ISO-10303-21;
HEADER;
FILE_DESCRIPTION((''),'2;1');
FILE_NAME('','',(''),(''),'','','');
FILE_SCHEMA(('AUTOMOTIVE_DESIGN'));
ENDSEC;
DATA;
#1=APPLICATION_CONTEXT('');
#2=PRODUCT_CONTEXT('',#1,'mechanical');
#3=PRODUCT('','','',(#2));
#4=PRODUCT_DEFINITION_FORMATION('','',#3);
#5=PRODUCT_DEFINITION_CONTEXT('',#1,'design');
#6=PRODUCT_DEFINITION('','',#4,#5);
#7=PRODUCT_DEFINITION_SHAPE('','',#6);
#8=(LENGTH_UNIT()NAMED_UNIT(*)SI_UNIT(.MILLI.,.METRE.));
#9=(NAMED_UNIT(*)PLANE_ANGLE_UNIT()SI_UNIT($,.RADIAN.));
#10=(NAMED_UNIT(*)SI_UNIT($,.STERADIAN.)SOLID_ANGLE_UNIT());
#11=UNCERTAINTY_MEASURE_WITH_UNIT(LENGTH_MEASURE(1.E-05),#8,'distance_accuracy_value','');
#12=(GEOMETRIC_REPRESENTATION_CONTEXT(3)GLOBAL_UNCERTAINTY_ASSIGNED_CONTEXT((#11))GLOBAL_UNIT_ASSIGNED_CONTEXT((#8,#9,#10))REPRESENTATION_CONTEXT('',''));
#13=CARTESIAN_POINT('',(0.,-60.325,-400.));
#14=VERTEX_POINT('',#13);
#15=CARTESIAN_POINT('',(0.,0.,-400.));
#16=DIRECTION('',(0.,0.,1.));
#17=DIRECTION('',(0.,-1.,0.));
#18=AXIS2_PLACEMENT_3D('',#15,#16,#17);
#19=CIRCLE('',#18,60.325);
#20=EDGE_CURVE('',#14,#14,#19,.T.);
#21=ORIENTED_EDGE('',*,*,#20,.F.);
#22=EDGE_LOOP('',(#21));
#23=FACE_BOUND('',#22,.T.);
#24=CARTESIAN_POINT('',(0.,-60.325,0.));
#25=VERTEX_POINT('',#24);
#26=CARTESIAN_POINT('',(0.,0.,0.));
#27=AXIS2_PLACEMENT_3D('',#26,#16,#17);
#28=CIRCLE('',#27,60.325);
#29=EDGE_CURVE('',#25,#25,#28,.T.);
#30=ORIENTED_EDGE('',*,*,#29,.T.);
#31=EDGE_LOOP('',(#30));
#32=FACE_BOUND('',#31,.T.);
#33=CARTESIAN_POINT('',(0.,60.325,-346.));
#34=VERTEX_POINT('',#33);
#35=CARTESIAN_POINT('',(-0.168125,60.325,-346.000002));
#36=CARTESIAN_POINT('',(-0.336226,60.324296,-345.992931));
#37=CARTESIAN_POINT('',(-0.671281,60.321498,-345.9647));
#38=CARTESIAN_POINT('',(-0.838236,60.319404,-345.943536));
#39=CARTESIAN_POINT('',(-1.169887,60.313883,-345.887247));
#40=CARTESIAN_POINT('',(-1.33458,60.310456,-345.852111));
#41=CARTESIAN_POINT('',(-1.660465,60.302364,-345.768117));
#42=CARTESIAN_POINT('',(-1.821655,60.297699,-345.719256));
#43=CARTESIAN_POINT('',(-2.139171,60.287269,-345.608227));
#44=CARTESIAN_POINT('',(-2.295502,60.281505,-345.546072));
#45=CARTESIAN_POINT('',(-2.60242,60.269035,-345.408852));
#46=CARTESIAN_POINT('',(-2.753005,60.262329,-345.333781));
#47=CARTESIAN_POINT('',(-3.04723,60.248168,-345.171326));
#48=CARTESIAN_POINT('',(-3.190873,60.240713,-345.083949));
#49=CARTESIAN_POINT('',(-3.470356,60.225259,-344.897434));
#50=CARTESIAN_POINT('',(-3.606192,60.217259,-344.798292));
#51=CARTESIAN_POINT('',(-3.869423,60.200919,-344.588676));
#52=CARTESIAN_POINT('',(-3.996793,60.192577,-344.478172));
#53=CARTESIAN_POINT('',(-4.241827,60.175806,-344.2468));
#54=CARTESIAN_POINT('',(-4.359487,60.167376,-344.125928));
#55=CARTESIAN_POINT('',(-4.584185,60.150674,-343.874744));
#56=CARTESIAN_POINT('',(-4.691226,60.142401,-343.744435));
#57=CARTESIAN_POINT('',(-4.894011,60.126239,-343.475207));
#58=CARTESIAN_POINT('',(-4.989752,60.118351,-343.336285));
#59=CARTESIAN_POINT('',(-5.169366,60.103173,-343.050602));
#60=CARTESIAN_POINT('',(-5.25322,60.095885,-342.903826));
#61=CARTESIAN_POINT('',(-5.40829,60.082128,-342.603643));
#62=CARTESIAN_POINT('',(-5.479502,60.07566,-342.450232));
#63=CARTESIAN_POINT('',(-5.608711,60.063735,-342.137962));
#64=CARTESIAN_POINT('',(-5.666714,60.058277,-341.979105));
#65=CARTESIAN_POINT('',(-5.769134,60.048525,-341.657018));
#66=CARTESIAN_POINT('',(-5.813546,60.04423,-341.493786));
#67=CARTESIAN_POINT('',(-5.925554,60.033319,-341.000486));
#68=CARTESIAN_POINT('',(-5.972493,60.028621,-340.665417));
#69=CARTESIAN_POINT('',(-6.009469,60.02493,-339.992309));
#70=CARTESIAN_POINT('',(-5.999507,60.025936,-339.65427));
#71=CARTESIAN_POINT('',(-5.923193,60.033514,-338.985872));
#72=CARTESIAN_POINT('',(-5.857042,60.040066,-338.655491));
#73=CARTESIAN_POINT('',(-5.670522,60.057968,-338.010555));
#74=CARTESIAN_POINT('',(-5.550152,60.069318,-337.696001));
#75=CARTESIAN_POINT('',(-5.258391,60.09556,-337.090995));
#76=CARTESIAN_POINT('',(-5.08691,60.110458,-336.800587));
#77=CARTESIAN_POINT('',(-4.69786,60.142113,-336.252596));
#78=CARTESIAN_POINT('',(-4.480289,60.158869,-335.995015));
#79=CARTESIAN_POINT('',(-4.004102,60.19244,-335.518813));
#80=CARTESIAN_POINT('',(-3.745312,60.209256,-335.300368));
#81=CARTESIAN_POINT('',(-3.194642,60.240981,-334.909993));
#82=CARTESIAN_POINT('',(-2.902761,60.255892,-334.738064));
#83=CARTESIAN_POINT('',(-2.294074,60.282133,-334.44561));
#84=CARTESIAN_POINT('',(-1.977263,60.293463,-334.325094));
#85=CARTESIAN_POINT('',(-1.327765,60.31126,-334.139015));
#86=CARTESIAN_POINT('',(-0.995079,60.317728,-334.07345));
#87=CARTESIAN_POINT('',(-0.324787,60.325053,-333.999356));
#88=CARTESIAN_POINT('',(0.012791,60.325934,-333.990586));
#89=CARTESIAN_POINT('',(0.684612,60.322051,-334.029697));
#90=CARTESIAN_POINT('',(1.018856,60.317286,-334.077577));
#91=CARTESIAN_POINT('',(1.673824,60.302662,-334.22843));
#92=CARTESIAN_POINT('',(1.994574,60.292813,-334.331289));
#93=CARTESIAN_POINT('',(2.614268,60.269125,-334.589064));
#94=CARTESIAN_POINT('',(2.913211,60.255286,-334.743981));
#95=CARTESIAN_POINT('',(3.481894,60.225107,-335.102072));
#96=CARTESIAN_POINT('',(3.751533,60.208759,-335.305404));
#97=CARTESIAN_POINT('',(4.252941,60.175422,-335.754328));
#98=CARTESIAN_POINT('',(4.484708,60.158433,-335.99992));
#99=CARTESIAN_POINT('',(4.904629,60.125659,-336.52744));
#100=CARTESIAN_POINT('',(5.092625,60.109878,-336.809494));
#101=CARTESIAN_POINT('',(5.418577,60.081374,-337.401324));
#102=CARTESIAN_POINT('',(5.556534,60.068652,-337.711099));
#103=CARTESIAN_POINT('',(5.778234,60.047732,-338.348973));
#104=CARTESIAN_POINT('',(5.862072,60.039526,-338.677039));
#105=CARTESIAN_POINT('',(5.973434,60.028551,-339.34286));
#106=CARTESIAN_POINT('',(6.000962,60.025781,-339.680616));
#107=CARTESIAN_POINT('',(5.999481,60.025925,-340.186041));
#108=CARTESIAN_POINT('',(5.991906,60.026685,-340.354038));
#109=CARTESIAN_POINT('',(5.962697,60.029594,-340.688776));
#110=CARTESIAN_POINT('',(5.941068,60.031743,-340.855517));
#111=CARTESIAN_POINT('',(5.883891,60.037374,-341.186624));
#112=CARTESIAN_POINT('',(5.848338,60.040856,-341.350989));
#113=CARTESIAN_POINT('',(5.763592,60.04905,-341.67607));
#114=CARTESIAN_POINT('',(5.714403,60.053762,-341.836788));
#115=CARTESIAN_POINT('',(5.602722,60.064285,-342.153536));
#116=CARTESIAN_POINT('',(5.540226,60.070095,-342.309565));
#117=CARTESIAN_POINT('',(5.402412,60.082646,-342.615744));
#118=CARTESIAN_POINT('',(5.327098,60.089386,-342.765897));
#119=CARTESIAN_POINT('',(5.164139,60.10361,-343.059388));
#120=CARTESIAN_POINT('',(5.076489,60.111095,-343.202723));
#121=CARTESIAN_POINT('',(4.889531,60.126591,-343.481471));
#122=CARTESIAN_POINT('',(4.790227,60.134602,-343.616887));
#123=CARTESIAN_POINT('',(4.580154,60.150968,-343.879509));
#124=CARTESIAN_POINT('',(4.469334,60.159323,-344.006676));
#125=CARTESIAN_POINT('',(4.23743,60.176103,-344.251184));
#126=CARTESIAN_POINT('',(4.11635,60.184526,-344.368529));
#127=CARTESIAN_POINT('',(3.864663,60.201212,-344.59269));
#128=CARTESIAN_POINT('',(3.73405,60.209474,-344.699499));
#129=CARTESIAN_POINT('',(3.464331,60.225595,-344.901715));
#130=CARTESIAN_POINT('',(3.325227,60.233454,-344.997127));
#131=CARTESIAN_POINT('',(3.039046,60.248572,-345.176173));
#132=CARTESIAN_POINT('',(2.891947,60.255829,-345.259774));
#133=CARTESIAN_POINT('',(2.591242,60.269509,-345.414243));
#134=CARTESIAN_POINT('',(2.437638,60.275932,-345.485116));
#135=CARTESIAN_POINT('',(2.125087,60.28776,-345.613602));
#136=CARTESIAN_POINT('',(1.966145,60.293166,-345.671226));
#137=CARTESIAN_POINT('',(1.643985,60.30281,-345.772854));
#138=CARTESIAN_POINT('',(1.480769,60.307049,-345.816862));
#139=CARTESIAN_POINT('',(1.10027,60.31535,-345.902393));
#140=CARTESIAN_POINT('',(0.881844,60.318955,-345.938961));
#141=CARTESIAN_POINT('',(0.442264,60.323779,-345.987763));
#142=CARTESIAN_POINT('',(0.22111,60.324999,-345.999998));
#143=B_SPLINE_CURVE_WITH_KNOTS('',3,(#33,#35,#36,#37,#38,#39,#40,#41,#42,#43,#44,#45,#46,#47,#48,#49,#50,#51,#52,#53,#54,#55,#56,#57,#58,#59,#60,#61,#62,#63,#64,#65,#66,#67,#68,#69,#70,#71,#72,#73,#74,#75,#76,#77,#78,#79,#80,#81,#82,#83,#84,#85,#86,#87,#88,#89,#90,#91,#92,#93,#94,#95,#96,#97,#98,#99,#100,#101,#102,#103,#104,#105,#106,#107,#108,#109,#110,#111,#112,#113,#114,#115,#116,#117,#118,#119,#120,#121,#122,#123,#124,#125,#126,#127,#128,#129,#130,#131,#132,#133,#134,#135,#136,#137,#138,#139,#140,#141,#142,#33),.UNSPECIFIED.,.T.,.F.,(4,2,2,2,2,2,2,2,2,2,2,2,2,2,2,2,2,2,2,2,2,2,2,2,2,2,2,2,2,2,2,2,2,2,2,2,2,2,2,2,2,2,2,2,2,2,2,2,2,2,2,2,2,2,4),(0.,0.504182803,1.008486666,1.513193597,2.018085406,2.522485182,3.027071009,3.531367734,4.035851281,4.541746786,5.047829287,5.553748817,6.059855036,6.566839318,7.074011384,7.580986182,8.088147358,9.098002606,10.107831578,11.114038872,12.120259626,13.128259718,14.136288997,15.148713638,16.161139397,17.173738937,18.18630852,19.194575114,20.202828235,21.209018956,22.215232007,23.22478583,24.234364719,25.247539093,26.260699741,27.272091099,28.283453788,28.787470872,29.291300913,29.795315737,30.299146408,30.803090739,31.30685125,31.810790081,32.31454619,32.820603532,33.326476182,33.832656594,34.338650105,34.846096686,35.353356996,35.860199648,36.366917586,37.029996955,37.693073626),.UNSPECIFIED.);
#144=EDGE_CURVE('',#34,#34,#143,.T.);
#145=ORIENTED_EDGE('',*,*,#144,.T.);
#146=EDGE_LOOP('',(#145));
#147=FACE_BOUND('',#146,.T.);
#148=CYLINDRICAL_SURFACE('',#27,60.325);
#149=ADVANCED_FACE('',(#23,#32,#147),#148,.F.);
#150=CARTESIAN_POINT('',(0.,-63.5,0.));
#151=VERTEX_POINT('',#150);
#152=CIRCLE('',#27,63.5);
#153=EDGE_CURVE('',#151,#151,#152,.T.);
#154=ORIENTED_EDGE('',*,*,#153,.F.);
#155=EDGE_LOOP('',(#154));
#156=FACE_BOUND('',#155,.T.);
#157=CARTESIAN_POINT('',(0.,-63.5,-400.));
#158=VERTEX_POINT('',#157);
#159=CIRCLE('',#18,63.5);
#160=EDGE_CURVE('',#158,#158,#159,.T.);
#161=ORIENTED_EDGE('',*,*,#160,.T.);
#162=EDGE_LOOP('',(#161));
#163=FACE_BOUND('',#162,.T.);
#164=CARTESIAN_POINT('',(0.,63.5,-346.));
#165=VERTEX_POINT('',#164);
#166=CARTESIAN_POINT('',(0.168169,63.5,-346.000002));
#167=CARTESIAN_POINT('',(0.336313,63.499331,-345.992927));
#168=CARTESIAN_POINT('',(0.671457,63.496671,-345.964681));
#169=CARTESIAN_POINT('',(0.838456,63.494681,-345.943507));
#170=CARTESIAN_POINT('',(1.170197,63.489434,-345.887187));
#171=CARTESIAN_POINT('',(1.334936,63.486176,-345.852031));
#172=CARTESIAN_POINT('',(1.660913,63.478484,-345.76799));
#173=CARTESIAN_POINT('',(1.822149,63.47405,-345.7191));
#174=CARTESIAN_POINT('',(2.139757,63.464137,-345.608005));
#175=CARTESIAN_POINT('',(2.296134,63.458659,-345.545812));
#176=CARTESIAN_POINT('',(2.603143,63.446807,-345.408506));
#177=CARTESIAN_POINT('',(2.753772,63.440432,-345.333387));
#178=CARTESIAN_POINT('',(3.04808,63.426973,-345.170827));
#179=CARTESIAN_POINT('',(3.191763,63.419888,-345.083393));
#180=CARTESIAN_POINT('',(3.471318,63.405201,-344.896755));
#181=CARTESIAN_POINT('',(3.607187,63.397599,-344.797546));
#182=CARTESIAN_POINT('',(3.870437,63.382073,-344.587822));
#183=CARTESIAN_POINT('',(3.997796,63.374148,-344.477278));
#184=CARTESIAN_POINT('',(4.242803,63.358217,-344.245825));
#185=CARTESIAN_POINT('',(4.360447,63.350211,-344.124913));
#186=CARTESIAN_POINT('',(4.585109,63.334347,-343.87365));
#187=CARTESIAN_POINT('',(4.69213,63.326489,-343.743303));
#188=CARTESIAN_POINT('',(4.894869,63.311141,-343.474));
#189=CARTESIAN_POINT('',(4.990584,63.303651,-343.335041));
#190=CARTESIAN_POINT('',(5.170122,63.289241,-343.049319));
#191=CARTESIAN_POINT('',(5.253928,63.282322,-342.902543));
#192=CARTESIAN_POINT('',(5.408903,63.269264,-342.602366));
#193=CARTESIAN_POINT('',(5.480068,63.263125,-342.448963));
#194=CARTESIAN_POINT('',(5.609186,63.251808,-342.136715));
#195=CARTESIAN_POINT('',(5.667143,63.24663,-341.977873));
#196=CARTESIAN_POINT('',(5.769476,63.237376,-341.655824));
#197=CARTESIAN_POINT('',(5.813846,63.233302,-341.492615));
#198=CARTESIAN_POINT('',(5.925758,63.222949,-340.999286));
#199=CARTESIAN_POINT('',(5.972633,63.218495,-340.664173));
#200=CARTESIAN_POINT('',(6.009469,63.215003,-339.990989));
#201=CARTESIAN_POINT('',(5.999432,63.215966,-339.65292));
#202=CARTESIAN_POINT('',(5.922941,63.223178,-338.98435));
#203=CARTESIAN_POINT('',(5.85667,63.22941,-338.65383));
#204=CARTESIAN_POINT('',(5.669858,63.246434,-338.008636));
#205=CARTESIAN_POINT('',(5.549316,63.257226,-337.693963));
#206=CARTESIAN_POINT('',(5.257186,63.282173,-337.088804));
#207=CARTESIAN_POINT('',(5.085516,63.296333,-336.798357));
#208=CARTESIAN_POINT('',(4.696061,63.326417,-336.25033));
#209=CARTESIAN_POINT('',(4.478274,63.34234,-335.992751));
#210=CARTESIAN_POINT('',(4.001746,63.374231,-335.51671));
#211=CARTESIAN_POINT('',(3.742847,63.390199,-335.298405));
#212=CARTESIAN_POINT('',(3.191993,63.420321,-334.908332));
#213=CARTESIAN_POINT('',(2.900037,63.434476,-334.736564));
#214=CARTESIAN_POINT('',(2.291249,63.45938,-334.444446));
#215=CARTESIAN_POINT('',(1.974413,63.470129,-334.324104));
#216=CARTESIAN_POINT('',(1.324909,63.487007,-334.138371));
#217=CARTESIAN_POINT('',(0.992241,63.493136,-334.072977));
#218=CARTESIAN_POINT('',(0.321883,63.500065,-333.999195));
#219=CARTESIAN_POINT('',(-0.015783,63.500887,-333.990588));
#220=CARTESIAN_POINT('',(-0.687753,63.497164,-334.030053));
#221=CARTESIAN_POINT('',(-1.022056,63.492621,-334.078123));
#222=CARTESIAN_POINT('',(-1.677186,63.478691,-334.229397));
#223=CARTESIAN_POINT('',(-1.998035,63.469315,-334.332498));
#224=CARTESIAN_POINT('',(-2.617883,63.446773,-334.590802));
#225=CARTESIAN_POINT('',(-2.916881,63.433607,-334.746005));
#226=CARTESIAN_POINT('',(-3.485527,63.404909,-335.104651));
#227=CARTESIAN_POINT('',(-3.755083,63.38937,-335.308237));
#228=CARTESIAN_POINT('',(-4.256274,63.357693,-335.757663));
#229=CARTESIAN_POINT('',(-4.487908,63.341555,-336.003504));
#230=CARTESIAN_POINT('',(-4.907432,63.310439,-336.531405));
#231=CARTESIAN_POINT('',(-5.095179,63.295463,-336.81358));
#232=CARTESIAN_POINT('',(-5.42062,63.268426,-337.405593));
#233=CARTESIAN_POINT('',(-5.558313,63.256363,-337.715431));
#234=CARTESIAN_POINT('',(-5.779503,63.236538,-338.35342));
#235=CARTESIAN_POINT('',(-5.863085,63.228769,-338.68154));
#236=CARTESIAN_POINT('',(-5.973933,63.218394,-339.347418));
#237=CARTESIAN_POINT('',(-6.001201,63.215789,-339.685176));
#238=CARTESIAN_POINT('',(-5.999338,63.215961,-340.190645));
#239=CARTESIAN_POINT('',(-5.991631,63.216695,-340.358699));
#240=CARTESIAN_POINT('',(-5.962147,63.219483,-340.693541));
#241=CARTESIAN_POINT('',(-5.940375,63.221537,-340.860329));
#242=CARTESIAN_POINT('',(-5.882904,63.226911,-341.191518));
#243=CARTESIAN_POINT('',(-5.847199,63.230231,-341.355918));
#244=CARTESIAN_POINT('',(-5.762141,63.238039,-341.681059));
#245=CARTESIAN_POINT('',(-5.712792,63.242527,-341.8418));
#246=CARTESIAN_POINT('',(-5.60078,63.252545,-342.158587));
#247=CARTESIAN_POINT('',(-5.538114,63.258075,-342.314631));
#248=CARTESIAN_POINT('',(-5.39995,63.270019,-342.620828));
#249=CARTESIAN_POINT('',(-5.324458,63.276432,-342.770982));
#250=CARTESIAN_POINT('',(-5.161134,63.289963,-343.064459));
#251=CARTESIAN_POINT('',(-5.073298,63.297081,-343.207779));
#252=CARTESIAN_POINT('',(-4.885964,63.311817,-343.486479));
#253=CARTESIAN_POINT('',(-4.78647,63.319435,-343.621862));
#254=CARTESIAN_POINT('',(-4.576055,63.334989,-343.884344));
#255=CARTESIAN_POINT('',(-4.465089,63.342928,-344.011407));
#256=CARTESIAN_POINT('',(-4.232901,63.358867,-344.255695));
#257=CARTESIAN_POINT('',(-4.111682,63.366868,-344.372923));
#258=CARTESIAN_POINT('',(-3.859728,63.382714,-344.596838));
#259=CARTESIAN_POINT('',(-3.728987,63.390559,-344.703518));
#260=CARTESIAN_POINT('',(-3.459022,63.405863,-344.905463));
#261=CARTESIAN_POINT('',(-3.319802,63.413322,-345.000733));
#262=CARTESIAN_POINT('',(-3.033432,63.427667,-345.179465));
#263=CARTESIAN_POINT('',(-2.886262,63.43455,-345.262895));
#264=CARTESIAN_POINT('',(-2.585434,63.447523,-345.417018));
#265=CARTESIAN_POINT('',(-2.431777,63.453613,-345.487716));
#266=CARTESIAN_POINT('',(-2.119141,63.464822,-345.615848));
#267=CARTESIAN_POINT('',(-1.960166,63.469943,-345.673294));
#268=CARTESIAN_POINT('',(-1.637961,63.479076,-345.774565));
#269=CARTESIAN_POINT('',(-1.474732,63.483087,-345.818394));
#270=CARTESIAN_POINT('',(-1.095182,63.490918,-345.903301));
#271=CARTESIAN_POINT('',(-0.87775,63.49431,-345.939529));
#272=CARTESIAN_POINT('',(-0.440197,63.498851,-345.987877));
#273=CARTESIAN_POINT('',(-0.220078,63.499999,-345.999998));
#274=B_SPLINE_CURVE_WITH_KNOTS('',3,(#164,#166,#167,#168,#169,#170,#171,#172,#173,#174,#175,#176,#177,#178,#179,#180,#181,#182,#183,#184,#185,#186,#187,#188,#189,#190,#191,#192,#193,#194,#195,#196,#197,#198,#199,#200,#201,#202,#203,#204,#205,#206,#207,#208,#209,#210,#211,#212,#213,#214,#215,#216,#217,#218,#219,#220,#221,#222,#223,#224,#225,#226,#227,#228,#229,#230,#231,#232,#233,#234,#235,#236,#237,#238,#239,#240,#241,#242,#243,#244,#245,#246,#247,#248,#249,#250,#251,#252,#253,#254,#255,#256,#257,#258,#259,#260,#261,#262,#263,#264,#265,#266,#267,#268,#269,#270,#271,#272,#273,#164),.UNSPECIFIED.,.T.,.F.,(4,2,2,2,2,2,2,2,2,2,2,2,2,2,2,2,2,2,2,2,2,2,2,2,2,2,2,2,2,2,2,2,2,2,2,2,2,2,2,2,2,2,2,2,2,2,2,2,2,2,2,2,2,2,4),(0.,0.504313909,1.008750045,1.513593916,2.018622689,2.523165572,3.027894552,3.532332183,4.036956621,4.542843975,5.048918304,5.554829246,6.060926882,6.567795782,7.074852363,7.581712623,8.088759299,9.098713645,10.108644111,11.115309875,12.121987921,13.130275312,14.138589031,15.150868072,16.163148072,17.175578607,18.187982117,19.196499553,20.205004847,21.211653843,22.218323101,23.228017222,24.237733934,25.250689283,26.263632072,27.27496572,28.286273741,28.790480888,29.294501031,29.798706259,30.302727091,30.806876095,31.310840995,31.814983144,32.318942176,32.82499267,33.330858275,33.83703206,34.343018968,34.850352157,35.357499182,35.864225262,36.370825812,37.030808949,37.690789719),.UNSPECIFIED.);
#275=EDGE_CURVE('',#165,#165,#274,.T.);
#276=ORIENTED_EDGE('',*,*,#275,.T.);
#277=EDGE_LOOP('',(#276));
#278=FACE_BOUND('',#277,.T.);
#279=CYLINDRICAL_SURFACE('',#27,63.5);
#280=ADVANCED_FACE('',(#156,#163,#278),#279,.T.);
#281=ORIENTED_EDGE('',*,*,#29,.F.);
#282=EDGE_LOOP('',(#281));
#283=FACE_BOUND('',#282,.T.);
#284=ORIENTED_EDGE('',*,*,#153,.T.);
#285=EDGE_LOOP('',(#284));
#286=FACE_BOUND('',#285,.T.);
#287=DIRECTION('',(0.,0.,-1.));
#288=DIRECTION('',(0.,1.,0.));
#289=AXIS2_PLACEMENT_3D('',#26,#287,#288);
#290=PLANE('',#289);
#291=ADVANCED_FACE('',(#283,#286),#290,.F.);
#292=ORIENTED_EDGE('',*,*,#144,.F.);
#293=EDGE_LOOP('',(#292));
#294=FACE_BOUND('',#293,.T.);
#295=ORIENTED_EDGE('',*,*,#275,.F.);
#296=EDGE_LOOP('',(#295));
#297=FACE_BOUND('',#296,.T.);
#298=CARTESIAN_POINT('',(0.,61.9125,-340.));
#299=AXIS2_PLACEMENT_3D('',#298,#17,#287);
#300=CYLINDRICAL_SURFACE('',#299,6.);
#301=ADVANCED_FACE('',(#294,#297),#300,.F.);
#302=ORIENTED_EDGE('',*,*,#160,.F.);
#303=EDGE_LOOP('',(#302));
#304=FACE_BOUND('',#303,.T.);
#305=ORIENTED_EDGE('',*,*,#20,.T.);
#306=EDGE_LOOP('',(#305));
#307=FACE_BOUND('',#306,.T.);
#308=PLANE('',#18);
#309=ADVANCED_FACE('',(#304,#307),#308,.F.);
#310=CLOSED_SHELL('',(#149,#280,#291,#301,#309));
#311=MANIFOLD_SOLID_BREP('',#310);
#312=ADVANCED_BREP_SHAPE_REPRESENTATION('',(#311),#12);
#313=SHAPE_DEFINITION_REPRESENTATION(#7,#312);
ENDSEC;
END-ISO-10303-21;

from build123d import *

# Parameters (mm, degrees)
SKETCH2_W              = 3.175
SKETCH2_H              = 400
CUT_REVOLVE4_START     = 60.025874806
CUT_REVOLVE4_OUTLINE_R = 6
CUT_REVOLVE4_DEPTH     = 3.474125294


# Read off the part's stored shape, not the designer's step: Cut-Revolve4
with BuildPart() as part:
    # Sketch2 → Revolve1 (revolve)
    with BuildSketch(Plane.YZ, mode=Mode.PRIVATE) as revolve1_sk:
        with Locations((61.9125, -200)):
            Rectangle(SKETCH2_W, SKETCH2_H)
    revolve(revolve1_sk.sketch.rotate(Axis((0, 0, 0), (0, 0, -1)), 180), axis=Axis((0, 0, 0), (0, 0, -1)))

    # Cut-Revolve4 outline → Cut-Revolve4 (cut)
    with BuildSketch(Plane(origin=(0, 0, 0), x_dir=(1, 0, 0), z_dir=(0, 1, 0)).offset(CUT_REVOLVE4_START)):
        with Locations((0, 340)):
            Circle(CUT_REVOLVE4_OUTLINE_R)
    extrude(amount=CUT_REVOLVE4_DEPTH, mode=Mode.SUBTRACT)


solid = part.part
